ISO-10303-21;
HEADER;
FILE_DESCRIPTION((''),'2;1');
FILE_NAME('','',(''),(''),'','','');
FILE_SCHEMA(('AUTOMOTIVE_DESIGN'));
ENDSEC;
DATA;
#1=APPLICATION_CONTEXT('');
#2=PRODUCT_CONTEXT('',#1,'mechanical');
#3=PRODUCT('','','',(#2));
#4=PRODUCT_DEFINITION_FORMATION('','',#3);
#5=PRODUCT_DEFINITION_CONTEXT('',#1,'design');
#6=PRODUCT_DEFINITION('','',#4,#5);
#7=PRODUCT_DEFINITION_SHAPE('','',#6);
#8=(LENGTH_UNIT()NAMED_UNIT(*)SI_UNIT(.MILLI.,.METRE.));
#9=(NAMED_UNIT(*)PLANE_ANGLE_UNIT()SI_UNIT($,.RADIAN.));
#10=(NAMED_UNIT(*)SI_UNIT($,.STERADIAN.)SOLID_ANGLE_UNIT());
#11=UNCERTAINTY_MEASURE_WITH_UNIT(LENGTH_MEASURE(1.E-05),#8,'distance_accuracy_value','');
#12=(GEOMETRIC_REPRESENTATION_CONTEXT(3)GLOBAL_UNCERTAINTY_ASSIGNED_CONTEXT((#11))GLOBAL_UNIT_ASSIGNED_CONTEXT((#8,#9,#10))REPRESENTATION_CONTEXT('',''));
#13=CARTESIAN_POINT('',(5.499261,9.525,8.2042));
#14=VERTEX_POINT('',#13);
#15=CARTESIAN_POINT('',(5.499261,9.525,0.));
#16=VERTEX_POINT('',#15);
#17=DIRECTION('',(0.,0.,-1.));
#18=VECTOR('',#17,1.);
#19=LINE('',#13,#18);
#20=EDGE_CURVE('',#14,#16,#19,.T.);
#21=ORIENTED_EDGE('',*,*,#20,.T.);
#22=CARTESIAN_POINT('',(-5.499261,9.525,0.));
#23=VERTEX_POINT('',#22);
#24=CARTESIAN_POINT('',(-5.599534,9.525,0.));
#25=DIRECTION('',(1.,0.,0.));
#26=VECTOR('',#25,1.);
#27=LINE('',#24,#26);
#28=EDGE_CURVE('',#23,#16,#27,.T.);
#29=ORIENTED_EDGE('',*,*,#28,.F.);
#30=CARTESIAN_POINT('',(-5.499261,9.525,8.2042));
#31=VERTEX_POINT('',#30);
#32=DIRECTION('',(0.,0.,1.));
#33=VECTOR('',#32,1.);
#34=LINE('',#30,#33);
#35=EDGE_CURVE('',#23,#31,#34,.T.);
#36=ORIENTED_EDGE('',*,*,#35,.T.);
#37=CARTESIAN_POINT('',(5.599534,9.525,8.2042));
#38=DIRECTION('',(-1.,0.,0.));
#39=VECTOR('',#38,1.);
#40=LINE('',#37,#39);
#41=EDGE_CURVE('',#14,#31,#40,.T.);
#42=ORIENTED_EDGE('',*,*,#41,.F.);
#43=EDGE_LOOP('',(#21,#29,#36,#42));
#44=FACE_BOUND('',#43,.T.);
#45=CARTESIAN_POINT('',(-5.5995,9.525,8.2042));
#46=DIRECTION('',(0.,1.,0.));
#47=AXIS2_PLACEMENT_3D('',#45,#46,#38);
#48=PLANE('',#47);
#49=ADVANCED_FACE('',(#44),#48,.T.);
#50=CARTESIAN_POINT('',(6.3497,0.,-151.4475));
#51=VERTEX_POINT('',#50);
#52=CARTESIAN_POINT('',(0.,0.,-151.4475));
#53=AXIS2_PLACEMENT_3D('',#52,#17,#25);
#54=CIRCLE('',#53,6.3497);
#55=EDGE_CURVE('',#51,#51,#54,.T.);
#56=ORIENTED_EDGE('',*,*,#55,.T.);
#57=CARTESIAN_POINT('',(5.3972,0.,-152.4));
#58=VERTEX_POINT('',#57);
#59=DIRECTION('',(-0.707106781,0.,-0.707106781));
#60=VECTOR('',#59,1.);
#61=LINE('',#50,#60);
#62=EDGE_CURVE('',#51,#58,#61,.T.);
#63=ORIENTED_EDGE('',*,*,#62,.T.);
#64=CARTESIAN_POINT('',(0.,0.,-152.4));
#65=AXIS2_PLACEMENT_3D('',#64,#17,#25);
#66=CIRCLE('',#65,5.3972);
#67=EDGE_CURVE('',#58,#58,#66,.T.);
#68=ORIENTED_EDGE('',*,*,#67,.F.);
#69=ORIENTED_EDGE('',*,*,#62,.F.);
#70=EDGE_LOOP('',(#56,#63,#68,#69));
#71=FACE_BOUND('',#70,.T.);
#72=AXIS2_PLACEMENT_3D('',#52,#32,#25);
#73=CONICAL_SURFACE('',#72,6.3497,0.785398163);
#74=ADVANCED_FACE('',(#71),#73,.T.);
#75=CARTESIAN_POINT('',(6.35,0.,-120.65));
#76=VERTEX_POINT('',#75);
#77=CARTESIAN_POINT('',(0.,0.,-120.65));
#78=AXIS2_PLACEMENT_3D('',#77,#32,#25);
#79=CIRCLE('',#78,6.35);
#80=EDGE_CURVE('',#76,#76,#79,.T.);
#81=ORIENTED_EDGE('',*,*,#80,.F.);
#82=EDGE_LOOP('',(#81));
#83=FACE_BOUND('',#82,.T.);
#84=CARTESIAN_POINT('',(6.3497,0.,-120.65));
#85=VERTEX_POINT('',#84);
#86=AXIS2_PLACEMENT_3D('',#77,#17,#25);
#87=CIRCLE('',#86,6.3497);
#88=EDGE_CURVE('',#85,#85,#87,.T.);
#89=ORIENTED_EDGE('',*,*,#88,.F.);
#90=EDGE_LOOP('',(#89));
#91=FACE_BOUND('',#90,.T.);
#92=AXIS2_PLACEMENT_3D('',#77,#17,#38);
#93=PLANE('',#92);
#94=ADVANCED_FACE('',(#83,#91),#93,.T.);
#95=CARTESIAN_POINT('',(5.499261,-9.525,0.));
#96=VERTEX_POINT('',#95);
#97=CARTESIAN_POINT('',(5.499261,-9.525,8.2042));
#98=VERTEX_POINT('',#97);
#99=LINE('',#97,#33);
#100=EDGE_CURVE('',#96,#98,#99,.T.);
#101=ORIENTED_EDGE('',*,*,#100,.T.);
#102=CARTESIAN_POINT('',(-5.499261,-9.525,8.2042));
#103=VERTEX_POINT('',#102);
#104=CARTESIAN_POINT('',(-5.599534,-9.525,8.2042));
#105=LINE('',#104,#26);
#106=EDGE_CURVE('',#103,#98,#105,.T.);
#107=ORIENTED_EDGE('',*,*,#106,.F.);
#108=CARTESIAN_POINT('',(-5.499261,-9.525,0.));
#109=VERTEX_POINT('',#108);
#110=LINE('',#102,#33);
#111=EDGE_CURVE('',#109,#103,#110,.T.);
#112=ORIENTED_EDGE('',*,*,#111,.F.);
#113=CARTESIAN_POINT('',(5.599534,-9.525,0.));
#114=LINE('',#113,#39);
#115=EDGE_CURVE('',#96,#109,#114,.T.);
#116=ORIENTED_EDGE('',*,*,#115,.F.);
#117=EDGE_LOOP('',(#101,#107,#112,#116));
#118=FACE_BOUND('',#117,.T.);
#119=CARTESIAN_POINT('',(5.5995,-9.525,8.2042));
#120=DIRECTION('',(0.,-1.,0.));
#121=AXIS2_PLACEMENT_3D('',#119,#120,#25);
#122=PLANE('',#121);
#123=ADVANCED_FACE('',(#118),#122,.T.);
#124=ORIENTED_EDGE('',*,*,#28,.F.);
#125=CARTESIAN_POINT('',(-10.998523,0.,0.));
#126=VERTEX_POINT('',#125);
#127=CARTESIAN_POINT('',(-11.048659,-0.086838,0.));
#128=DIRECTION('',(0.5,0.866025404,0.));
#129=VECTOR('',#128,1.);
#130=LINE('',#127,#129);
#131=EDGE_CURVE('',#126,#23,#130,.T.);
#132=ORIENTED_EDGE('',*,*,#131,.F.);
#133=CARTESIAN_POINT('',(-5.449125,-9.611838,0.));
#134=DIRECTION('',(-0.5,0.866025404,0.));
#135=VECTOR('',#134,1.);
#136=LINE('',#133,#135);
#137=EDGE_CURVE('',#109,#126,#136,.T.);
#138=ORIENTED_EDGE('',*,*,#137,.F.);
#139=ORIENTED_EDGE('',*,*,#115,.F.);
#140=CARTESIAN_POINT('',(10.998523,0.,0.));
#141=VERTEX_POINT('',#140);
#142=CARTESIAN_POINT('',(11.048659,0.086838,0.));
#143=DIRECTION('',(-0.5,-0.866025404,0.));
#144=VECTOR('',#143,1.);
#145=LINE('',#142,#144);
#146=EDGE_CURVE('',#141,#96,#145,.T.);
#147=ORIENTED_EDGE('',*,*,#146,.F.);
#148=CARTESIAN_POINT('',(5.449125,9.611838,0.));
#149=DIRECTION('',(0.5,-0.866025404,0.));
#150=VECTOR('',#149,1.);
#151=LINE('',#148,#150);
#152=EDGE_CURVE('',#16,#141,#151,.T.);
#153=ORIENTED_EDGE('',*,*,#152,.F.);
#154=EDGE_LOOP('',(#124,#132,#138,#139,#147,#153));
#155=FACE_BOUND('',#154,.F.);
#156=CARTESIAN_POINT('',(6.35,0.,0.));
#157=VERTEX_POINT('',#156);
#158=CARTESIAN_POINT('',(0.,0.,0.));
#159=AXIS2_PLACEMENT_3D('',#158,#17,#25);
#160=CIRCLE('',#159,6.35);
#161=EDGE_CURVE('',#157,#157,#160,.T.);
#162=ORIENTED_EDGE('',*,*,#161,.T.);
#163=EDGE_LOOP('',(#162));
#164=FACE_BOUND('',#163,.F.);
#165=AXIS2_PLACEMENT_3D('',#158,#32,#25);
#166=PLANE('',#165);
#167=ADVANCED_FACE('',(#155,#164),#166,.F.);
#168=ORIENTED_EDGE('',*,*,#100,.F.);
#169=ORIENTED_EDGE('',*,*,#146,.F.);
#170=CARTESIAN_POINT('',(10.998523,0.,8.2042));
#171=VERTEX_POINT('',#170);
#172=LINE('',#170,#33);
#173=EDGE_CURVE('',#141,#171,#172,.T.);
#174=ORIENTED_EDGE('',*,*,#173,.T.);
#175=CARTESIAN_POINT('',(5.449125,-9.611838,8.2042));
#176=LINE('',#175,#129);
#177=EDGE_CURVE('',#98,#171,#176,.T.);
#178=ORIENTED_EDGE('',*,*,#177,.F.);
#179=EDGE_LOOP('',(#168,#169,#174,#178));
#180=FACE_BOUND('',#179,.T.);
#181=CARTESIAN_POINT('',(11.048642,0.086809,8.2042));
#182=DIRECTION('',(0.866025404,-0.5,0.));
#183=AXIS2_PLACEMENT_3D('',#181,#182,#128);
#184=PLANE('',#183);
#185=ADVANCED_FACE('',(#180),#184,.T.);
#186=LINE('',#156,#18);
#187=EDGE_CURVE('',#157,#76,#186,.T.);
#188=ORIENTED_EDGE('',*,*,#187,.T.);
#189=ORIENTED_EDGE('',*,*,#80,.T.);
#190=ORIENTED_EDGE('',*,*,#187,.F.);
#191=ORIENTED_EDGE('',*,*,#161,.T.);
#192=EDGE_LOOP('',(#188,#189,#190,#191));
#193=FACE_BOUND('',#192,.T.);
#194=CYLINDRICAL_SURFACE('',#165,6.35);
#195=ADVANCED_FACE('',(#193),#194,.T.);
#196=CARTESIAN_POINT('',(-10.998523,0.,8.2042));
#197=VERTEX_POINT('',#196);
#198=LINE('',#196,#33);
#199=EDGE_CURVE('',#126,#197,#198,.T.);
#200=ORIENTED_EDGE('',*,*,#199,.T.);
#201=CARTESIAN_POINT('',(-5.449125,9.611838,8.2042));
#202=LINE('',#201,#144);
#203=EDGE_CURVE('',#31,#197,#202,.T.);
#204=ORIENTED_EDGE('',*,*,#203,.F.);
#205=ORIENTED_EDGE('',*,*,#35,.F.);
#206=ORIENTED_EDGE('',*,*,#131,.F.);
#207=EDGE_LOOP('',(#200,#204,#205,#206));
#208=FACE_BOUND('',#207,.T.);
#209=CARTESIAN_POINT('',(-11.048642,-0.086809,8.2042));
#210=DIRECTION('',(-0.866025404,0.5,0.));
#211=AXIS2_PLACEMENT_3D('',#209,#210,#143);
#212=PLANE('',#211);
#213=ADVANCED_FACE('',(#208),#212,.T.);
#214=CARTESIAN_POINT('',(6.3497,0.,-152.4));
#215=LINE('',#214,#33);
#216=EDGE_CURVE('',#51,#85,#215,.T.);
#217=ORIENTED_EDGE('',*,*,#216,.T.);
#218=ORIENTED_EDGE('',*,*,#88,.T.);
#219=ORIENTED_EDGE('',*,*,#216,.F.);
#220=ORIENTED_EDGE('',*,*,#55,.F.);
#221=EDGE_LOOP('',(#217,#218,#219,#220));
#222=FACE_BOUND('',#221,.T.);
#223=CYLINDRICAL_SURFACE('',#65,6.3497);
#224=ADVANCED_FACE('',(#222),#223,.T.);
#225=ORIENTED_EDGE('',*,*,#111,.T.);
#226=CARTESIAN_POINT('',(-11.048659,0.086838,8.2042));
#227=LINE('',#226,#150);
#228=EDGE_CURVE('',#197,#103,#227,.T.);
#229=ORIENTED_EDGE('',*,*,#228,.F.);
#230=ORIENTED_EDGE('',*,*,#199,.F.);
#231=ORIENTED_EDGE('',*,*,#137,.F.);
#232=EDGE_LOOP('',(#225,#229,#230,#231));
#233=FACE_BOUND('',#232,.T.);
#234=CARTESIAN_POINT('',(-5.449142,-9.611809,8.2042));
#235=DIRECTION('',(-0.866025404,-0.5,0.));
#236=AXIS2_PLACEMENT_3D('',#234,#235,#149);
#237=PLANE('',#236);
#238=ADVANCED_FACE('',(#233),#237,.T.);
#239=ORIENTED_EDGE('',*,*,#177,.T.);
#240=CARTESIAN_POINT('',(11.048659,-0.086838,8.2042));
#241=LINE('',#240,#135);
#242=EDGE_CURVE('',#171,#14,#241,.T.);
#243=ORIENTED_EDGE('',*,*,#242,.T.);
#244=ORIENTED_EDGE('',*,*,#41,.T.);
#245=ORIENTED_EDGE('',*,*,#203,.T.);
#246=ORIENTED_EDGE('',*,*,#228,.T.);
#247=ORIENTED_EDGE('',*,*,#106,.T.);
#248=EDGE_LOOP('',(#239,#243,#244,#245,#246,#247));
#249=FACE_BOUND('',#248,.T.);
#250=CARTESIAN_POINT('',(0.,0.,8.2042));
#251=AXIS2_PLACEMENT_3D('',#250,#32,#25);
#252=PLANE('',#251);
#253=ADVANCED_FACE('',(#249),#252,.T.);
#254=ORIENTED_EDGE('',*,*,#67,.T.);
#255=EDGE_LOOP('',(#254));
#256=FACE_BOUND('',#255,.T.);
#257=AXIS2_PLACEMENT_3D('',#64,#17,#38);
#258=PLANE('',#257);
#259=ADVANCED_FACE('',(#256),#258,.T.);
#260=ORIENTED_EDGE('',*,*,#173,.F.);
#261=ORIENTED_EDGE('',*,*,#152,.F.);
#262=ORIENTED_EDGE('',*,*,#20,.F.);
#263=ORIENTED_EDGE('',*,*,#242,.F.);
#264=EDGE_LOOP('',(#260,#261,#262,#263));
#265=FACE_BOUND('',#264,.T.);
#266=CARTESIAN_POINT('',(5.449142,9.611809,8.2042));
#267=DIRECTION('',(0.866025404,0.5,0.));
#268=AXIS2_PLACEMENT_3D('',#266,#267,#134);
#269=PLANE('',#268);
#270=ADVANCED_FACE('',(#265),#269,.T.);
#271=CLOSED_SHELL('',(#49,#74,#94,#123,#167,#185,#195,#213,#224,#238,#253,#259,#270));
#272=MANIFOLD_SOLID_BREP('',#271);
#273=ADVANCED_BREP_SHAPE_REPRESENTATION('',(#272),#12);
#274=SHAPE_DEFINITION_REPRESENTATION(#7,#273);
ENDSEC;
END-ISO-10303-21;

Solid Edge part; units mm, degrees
sketch "Sketch1" plane through (0, 0, 0) normal (0, 0, 1) x (1, 0, 0)
  circle A0 centre (0, 0) radius 11.049
  dimension "D1" = 22.098
extrude "Protrusion1" add sketch "Sketch1" along normal blind 8.2042
sketch "Sketch2" plane through (0, 0, 0) normal (0, 0, -1) x (1, 0, 0)
  circle A0 centre (0, 0) radius 6.35
extrude "Protrusion2" add sketch "Sketch2" along normal blind 152.4
sketch "Sketch3" plane through (0, 0, -152.4) normal (0, 0, -1) x (1, 0, 0)
  circle A0 centre (0, 0) radius 6.3497
extrude "Cutout1" cut sketch "Sketch3" against normal blind 31.75 flip side to cut
chamfer "Chamfer_1" distance 0.9525 angle 45 1 edges at (-6.3497, 0, -152.4)
sketch "Sketch4" plane through (0, 0, 8.2042) normal (0, 0, 1) x (1, 0, 0)
  line L0 (-5.5995, 9.525) -> (5.5995, 9.525)
  dimension "D1" = 19.05
extrude "Cutout2" cut sketch "Sketch4" against normal up to next material side at (0, 9.575, 8.2042)
pattern_circular "Pattern1" count 6 over 360 about axis through (0, 0, 8.2042) along (0, 0, 1) of "Cutout2"
properties part number "118092"
